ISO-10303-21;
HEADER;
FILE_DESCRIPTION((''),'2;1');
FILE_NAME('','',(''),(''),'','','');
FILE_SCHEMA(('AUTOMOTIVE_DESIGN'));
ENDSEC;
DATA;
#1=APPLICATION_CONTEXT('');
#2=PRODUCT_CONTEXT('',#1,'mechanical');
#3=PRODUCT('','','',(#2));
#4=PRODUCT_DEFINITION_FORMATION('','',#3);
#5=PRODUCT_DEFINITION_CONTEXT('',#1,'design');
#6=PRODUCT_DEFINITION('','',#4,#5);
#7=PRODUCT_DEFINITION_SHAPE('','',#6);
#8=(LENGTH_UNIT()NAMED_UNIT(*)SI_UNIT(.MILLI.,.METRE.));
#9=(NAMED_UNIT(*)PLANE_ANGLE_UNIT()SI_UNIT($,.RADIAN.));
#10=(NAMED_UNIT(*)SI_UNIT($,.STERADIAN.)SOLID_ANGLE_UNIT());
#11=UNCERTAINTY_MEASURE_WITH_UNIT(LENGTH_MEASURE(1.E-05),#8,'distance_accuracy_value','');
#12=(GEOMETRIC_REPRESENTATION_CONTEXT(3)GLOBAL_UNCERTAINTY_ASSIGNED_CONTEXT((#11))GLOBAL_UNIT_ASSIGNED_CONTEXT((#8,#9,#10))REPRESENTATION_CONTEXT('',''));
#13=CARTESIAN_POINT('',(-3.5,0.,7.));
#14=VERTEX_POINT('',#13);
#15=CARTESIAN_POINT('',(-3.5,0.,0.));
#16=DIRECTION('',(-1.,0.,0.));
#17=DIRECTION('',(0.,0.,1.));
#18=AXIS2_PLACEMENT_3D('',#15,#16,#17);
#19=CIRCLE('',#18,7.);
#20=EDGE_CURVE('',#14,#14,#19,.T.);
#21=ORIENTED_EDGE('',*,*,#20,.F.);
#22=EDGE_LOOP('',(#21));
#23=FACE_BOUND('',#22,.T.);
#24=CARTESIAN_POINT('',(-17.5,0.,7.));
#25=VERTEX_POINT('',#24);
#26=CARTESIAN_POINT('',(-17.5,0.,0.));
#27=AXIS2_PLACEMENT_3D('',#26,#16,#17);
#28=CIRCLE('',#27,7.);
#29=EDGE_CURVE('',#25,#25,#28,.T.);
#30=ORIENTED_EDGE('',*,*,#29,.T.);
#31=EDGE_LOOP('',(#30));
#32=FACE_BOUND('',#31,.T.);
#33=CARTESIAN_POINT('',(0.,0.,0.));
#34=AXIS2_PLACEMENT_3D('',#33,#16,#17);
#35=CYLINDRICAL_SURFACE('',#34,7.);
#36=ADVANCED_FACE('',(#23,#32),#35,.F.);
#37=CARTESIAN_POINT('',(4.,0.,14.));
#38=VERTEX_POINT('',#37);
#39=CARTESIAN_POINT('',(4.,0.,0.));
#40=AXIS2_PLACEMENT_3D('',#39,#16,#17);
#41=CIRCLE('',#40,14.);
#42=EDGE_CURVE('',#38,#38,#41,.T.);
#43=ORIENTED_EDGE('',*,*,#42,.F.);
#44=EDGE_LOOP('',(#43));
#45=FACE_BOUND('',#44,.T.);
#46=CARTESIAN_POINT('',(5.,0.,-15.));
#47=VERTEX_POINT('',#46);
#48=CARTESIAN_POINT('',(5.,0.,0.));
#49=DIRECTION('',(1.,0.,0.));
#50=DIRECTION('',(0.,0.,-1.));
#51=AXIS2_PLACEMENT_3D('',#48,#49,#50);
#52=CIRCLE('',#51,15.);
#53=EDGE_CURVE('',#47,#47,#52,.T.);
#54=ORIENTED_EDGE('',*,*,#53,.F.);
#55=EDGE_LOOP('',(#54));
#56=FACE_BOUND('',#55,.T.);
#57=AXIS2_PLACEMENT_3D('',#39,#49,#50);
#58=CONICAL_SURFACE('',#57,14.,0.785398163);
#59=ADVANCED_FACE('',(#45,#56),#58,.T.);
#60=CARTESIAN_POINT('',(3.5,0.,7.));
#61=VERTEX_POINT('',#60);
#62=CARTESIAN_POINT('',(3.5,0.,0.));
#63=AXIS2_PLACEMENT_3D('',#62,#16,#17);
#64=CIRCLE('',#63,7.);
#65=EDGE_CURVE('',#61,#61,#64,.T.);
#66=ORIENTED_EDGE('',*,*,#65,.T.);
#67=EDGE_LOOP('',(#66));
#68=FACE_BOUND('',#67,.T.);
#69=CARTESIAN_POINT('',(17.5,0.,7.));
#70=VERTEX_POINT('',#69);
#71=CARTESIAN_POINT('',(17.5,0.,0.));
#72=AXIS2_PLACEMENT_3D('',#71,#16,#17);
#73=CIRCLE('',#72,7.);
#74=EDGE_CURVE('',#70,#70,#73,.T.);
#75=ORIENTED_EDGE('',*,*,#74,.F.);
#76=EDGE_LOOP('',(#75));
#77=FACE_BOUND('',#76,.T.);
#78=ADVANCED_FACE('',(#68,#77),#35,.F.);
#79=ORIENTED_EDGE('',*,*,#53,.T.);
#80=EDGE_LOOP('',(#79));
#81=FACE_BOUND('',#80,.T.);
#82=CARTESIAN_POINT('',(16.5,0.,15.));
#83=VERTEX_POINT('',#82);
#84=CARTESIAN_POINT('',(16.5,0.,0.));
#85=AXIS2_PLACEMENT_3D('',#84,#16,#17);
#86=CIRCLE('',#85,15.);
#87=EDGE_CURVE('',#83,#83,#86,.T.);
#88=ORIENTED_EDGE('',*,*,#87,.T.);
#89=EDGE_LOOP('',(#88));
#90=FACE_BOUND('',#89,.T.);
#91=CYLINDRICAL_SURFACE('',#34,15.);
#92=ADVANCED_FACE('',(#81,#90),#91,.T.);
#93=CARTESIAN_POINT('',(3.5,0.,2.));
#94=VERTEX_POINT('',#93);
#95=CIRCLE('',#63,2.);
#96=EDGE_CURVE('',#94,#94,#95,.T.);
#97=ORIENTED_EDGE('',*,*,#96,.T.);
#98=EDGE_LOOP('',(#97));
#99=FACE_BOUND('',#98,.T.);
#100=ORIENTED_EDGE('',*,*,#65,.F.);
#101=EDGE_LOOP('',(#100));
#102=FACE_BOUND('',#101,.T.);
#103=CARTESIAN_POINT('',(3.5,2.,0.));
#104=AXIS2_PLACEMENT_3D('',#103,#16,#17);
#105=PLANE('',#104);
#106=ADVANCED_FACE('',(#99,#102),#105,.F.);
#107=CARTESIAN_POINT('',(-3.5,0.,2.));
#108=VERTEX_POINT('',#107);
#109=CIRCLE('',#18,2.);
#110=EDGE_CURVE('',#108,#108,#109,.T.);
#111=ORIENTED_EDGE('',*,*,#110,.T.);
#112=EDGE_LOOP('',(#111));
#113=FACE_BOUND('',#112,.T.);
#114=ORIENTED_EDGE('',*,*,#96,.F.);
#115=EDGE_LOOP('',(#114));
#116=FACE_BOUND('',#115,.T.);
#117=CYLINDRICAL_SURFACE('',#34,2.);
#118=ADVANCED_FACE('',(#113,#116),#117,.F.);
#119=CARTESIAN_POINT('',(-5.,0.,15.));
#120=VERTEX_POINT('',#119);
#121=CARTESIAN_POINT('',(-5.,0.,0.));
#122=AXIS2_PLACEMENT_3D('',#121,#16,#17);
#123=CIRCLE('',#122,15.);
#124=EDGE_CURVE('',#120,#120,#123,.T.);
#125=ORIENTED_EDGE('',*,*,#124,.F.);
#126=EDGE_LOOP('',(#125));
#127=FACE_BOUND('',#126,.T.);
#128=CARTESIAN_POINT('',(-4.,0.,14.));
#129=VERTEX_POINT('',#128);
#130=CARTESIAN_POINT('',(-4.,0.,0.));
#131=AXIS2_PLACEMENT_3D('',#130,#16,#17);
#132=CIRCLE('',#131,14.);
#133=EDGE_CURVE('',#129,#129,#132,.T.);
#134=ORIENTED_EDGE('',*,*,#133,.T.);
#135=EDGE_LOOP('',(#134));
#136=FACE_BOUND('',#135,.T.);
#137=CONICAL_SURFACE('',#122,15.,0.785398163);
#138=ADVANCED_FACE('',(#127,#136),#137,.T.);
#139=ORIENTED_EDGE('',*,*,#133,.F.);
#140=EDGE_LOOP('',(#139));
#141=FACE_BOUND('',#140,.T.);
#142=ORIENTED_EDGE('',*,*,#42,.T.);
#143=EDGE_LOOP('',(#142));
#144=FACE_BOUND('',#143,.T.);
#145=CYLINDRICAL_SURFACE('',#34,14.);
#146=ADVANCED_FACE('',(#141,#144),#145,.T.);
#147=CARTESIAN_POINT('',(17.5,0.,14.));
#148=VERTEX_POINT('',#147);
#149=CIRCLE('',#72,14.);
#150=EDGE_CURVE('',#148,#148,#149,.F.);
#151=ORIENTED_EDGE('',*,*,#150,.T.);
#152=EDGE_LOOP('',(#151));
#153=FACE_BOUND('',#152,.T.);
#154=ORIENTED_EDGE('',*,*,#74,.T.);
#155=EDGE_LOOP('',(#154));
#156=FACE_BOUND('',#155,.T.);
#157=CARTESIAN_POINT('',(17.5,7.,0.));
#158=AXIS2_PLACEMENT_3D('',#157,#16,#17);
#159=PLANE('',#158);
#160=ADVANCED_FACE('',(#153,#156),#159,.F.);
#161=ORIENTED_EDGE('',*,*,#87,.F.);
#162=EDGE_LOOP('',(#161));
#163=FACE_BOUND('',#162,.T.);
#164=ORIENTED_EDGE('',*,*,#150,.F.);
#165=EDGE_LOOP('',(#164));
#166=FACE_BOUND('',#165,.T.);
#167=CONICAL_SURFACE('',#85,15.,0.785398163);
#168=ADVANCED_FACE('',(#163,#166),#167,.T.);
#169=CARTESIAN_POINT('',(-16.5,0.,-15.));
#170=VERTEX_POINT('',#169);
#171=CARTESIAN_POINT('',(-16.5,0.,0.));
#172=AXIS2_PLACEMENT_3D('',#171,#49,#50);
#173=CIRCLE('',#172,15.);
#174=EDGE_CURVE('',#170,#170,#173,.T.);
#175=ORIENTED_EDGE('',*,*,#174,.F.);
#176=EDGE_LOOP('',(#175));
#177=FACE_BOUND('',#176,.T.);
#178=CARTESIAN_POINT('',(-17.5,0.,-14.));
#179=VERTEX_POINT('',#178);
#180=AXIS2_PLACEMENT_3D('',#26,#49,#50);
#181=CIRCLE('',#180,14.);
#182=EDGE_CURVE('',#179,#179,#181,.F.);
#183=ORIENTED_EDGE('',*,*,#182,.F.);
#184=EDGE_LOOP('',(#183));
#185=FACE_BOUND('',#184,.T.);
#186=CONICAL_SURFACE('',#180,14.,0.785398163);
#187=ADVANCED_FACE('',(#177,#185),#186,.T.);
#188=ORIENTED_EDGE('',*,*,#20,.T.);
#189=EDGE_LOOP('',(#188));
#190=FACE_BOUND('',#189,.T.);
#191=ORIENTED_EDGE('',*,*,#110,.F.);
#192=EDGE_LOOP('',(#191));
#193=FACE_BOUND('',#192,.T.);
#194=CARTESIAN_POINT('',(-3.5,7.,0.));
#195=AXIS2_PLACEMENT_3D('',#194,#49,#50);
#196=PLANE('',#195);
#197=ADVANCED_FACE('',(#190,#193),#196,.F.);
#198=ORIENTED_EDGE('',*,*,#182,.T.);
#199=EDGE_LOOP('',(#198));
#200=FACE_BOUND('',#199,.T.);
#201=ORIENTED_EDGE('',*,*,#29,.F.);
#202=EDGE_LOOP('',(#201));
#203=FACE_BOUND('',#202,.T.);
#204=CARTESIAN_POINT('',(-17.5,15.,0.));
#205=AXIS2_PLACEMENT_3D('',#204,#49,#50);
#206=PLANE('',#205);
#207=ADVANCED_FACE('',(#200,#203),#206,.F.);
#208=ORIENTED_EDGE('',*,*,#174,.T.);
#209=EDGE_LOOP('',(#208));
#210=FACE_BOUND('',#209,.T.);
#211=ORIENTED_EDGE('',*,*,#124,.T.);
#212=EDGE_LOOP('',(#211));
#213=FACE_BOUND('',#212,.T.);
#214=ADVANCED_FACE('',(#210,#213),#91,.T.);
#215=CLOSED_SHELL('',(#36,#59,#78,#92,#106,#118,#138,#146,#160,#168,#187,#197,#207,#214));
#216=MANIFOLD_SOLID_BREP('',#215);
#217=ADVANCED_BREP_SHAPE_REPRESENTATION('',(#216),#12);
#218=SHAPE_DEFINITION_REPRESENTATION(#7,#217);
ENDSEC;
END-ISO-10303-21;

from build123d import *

# Parameters (mm, degrees)
SFAZOWANIE1_SIZE = 1


with BuildPart() as part:
    # Szkic1 → Obrót1 (revolve)
    with BuildSketch(Plane.XY, mode=Mode.PRIVATE) as obr_t1_sk:
        Polygon((-17.5, 15), (-17.5, 7), (-3.5, 7), (-3.5, 2), (3.5, 2), (3.5, 7), (17.5, 7), (17.5, 15), (4, 15), (4, 14), (-4, 14), (-4, 15), align=None)
    revolve(obr_t1_sk.sketch.rotate(Axis((0, 0, 0), (1, 0, 0)), 90), axis=Axis((0, 0, 0), (1, 0, 0)))

    # Sfazowanie1
    sfazowanie1_edges = [part.edges().sort_by_distance(p)[0] for p in [
        (4, 0, -15),
        (17.5, 0, -15),
        (-17.5, 0, -15),
        (-4, 0, -15),
    ]]
    chamfer(sfazowanie1_edges, length=SFAZOWANIE1_SIZE - 0.0001)  # a hair under: the kernel refuses the full size


solid = part.part
